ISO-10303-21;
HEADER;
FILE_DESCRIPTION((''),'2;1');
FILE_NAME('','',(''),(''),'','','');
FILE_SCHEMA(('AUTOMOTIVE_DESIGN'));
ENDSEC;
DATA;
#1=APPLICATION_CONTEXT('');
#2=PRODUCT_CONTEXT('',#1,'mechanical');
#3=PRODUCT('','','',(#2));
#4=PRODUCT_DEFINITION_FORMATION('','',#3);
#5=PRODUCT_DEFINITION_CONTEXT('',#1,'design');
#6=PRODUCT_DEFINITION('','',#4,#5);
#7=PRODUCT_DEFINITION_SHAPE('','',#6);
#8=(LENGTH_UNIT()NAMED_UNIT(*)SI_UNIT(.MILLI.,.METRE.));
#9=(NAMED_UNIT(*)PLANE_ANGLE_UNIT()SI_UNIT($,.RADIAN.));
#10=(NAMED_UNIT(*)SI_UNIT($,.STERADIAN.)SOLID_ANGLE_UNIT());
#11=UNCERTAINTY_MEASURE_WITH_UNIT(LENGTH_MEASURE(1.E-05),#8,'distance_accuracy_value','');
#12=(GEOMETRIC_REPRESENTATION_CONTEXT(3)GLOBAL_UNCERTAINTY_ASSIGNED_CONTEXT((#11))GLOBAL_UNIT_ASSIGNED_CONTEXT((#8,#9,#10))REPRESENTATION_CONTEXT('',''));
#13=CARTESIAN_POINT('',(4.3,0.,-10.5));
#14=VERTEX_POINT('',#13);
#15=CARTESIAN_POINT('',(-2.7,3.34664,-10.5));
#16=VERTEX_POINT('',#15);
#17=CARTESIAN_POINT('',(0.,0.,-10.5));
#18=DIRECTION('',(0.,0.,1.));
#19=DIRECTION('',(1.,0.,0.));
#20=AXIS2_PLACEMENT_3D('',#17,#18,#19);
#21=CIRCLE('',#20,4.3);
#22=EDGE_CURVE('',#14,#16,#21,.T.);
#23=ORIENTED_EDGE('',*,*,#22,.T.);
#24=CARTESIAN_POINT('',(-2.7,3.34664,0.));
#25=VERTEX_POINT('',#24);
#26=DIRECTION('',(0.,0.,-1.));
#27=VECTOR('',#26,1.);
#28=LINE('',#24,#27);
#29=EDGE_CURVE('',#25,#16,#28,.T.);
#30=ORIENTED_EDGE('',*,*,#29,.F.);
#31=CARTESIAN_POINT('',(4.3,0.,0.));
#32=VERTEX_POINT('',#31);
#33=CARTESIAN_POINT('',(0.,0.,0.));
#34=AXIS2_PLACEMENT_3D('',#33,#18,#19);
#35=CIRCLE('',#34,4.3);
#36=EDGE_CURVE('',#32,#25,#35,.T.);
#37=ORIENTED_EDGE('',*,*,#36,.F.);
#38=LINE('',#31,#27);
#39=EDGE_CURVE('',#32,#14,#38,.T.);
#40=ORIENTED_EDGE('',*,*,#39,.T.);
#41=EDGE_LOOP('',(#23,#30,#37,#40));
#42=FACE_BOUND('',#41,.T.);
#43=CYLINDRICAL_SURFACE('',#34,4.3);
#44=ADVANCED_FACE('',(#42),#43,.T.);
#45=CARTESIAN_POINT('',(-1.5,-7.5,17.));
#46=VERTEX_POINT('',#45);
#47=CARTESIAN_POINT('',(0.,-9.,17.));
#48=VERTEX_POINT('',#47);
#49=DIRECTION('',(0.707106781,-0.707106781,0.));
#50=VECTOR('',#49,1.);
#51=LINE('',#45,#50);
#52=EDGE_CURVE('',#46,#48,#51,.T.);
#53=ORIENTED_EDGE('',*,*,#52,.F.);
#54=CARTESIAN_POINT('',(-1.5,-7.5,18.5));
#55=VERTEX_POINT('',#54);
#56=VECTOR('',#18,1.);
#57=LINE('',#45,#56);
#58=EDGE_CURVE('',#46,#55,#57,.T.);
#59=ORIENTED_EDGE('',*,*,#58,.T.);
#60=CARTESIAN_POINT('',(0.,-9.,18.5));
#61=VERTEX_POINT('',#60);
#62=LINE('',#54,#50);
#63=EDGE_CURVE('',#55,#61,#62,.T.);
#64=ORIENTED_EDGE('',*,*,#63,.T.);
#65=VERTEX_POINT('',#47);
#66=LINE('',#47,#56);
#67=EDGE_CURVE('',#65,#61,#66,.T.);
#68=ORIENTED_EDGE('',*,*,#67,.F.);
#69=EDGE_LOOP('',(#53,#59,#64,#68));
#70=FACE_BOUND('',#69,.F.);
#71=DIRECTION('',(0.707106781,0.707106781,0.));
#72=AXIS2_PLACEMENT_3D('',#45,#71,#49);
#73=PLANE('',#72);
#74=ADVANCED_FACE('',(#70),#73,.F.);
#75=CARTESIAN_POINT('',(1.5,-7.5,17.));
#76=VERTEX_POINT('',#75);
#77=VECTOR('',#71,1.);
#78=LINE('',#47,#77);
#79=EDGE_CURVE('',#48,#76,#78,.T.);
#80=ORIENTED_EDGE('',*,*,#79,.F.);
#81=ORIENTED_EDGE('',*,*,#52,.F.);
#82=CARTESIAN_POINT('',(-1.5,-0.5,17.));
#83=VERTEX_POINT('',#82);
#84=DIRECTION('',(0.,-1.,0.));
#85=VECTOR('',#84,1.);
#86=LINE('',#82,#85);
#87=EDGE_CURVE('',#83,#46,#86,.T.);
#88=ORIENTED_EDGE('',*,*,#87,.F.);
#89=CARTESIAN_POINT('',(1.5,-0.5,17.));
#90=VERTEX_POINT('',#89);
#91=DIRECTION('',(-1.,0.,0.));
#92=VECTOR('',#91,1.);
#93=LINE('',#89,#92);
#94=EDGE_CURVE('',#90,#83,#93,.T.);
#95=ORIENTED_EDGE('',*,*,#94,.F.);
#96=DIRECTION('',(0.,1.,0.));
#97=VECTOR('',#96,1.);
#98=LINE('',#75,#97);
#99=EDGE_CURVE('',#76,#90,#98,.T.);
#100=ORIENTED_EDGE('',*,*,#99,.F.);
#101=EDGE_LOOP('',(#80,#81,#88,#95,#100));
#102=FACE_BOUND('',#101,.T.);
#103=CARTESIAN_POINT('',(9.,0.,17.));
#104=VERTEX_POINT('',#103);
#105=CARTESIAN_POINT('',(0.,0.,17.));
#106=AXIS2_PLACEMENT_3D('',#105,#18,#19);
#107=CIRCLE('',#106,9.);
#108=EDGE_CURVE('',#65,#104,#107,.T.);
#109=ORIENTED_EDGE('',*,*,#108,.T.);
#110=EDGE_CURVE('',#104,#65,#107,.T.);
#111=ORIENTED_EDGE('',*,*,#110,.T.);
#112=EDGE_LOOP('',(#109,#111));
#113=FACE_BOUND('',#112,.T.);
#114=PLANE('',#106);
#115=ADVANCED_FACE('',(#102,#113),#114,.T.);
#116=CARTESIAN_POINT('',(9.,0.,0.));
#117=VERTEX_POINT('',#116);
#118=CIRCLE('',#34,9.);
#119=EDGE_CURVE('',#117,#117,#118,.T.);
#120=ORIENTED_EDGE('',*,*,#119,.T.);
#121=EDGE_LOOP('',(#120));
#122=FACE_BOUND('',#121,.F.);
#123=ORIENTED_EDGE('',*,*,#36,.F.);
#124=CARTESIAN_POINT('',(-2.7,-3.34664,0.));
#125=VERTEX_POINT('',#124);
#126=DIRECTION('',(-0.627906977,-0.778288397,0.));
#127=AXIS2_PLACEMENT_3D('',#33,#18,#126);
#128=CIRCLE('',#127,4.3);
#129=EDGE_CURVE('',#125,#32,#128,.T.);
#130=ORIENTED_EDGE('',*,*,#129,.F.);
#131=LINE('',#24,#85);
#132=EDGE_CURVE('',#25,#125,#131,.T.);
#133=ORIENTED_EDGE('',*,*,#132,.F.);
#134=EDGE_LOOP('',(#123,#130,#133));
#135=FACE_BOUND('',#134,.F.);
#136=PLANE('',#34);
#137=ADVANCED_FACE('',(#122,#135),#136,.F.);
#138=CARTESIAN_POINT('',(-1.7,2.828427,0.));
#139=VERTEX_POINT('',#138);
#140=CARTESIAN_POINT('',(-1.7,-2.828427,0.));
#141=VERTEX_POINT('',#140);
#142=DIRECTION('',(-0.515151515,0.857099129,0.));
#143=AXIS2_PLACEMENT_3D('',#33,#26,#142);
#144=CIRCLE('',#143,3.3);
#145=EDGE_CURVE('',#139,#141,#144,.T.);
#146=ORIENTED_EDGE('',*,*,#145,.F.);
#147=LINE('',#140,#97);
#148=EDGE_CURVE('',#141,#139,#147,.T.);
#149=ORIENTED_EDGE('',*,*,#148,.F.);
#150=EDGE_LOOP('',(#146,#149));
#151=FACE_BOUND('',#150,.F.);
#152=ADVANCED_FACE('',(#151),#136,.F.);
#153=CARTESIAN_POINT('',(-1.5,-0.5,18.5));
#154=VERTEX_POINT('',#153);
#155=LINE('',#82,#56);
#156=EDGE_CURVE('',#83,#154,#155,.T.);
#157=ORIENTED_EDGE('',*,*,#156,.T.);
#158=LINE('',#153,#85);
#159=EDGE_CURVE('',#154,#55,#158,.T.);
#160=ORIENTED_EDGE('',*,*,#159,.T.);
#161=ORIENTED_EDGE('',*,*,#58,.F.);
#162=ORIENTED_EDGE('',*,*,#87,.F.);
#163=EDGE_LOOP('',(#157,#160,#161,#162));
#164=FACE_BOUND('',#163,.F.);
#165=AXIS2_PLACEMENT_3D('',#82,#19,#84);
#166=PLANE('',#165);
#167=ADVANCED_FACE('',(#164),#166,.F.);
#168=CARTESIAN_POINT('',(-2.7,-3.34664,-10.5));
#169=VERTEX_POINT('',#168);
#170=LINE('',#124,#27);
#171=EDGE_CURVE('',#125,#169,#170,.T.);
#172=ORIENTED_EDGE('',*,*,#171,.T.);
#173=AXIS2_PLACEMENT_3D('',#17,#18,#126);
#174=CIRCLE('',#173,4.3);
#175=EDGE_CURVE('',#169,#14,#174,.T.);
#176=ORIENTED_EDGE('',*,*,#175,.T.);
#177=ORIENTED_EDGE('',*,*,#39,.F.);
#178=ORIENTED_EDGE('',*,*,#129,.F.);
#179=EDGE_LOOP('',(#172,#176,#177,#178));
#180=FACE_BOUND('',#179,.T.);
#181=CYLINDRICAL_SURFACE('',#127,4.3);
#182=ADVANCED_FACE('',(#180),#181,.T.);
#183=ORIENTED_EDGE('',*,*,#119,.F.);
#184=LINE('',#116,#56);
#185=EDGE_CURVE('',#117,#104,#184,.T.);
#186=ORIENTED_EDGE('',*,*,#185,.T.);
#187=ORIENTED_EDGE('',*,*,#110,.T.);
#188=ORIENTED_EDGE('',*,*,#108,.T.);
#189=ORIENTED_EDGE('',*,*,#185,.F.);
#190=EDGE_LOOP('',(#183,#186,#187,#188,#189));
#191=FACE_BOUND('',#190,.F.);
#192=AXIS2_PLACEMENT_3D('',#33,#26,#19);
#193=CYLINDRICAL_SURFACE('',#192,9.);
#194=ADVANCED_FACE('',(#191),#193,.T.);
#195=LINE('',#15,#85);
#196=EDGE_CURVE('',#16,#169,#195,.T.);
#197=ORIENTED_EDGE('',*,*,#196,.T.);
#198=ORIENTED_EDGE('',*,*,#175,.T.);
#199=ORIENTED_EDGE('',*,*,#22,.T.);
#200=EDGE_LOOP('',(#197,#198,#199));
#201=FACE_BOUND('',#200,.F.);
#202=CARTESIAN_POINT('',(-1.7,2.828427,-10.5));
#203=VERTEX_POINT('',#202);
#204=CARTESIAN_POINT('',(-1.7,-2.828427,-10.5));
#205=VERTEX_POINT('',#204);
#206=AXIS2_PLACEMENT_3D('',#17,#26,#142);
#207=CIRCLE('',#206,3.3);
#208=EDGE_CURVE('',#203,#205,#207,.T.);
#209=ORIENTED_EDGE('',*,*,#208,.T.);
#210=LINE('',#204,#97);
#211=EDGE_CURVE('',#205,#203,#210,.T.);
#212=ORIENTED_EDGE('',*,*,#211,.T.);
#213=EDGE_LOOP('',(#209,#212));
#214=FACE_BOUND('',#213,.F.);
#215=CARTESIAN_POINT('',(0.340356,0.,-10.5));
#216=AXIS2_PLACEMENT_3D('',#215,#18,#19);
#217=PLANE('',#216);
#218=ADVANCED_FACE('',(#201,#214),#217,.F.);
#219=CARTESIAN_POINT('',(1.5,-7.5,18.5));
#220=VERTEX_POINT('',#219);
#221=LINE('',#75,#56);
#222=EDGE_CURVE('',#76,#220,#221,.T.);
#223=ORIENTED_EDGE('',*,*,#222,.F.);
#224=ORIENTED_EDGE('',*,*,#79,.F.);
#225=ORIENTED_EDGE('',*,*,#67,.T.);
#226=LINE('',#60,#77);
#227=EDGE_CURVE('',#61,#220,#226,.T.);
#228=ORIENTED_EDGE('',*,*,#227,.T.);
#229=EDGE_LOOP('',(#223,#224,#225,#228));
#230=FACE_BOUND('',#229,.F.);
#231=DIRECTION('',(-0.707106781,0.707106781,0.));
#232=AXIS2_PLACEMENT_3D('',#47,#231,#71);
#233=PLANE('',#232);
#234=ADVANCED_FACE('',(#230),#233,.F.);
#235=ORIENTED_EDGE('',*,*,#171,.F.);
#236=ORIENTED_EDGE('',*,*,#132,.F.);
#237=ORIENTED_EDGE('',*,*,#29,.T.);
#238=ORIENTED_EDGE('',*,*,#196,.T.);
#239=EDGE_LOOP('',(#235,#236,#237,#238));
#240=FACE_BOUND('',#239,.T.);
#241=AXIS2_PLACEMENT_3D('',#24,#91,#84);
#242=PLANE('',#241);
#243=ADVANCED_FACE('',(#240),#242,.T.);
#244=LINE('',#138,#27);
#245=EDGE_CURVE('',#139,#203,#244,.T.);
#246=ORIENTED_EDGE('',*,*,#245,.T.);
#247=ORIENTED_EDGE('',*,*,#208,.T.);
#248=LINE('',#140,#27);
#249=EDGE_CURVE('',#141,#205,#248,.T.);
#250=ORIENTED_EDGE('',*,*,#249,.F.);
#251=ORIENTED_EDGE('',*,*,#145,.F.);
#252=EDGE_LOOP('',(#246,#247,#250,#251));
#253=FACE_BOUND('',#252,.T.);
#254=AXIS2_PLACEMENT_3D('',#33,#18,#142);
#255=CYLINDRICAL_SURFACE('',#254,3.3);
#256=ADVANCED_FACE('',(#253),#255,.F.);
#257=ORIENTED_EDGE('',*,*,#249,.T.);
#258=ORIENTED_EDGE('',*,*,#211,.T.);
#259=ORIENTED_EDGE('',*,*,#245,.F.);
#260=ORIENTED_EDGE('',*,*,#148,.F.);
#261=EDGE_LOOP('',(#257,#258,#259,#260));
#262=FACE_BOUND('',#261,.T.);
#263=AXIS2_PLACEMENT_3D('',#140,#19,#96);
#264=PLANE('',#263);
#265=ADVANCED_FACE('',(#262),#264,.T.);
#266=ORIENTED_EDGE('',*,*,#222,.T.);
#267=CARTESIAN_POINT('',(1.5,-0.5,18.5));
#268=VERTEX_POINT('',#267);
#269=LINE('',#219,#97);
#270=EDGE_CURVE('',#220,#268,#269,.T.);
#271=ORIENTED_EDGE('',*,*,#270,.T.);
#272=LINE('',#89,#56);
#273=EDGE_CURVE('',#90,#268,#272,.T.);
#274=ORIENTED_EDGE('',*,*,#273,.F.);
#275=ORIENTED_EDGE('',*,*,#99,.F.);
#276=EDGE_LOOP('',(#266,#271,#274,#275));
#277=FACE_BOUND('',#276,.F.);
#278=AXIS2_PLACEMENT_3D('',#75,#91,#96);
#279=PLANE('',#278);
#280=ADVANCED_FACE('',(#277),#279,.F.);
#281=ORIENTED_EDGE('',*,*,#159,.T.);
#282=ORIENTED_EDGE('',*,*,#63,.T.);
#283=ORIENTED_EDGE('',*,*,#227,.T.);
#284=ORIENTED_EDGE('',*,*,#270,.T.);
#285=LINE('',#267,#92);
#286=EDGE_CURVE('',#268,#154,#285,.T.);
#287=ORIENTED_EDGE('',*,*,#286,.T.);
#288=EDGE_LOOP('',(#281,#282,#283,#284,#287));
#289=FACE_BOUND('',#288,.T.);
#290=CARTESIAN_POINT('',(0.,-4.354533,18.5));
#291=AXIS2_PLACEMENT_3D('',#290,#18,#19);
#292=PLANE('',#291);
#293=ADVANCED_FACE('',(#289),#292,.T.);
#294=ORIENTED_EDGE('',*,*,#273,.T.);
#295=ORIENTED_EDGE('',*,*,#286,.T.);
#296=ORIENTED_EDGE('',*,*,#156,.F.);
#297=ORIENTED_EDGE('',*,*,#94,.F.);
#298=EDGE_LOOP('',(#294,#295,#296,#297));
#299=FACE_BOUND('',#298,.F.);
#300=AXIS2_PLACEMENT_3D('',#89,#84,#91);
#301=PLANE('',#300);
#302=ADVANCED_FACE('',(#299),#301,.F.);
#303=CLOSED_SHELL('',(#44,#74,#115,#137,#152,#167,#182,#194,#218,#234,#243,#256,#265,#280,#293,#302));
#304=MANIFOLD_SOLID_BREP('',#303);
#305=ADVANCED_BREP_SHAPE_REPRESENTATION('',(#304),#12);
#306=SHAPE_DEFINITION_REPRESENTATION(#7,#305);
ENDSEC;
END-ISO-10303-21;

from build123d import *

# Parameters (mm, degrees)
F0_R     = 9
F1_DEPTH = 17
F2_DEPTH = 10.5
F4_DEPTH = 1.5


# Not quite as in the source:
# - a feature names something its author has since deleted; it is built from what else it names


with BuildPart() as f1:
    # F0 (on Top) → F1 (new body)
    with BuildSketch(Plane.XY):
        Circle(F0_R)
        with BuildLine():
            ThreePointArc((-2.7, 3.3466401061), (1.8547236991, 3.8794329483), (4.3, 0))
            ThreePointArc((4.3, 0), (1.8547236991, -3.8794329483), (-2.7, -3.3466401061))
            ThreePointArc((-2.7, -3.3466401061), (-4.3, 0), (-2.7, 3.3466401061))
        make_face(mode=Mode.SUBTRACT)
        with BuildLine():
            ThreePointArc((-2.7, -3.3466401061), (1.8547236991, -3.8794329483), (4.3, 0))
            ThreePointArc((4.3, 0), (1.8547236991, 3.8794329483), (-2.7, 3.3466401061))
            Line((-2.7, 3.3466401061), (-2.7, -3.3466401061))
        make_face()
        with BuildLine():
            Line((-1.7, -2.8284271247), (-1.7, 2.8284271247))
            ThreePointArc((-1.7, 2.8284271247), (3.3, 0), (-1.7, -2.8284271247))
        make_face(mode=Mode.SUBTRACT)
        with BuildLine():
            ThreePointArc((-1.7, -2.8284271247), (3.3, 0), (-1.7, 2.8284271247))
            Line((-1.7, 2.8284271247), (-1.7, -2.8284271247))
        make_face()
        with BuildLine():
            Line((-2.7, -3.3466401061), (-2.7, 3.3466401061))
            ThreePointArc((-2.7, 3.3466401061), (-4.3, 0), (-2.7, -3.3466401061))
        make_face()
    extrude(amount=F1_DEPTH)

    # F0 (on Top) → F2 (join)
    with BuildSketch(Plane.XY):
        with BuildLine():
            ThreePointArc((-2.7, -3.3466401061), (1.8547236991, -3.8794329483), (4.3, 0))
            ThreePointArc((4.3, 0), (1.8547236991, 3.8794329483), (-2.7, 3.3466401061))
            Line((-2.7, 3.3466401061), (-2.7, -3.3466401061))
        make_face()
        with BuildLine():
            Line((-1.7, -2.8284271247), (-1.7, 2.8284271247))
            ThreePointArc((-1.7, 2.8284271247), (3.3, 0), (-1.7, -2.8284271247))
        make_face(mode=Mode.SUBTRACT)
    extrude(amount=-F2_DEPTH)

    # F3 (on face) → F4 (join)
    with BuildSketch(Plane.XY.offset(17)):
        Polygon((-1.5, -7.5), (0, -9), (1.5, -7.5), (1.5, -0.5), (-1.5, -0.5), align=None)
    extrude(amount=F4_DEPTH)


solid = f1.part
